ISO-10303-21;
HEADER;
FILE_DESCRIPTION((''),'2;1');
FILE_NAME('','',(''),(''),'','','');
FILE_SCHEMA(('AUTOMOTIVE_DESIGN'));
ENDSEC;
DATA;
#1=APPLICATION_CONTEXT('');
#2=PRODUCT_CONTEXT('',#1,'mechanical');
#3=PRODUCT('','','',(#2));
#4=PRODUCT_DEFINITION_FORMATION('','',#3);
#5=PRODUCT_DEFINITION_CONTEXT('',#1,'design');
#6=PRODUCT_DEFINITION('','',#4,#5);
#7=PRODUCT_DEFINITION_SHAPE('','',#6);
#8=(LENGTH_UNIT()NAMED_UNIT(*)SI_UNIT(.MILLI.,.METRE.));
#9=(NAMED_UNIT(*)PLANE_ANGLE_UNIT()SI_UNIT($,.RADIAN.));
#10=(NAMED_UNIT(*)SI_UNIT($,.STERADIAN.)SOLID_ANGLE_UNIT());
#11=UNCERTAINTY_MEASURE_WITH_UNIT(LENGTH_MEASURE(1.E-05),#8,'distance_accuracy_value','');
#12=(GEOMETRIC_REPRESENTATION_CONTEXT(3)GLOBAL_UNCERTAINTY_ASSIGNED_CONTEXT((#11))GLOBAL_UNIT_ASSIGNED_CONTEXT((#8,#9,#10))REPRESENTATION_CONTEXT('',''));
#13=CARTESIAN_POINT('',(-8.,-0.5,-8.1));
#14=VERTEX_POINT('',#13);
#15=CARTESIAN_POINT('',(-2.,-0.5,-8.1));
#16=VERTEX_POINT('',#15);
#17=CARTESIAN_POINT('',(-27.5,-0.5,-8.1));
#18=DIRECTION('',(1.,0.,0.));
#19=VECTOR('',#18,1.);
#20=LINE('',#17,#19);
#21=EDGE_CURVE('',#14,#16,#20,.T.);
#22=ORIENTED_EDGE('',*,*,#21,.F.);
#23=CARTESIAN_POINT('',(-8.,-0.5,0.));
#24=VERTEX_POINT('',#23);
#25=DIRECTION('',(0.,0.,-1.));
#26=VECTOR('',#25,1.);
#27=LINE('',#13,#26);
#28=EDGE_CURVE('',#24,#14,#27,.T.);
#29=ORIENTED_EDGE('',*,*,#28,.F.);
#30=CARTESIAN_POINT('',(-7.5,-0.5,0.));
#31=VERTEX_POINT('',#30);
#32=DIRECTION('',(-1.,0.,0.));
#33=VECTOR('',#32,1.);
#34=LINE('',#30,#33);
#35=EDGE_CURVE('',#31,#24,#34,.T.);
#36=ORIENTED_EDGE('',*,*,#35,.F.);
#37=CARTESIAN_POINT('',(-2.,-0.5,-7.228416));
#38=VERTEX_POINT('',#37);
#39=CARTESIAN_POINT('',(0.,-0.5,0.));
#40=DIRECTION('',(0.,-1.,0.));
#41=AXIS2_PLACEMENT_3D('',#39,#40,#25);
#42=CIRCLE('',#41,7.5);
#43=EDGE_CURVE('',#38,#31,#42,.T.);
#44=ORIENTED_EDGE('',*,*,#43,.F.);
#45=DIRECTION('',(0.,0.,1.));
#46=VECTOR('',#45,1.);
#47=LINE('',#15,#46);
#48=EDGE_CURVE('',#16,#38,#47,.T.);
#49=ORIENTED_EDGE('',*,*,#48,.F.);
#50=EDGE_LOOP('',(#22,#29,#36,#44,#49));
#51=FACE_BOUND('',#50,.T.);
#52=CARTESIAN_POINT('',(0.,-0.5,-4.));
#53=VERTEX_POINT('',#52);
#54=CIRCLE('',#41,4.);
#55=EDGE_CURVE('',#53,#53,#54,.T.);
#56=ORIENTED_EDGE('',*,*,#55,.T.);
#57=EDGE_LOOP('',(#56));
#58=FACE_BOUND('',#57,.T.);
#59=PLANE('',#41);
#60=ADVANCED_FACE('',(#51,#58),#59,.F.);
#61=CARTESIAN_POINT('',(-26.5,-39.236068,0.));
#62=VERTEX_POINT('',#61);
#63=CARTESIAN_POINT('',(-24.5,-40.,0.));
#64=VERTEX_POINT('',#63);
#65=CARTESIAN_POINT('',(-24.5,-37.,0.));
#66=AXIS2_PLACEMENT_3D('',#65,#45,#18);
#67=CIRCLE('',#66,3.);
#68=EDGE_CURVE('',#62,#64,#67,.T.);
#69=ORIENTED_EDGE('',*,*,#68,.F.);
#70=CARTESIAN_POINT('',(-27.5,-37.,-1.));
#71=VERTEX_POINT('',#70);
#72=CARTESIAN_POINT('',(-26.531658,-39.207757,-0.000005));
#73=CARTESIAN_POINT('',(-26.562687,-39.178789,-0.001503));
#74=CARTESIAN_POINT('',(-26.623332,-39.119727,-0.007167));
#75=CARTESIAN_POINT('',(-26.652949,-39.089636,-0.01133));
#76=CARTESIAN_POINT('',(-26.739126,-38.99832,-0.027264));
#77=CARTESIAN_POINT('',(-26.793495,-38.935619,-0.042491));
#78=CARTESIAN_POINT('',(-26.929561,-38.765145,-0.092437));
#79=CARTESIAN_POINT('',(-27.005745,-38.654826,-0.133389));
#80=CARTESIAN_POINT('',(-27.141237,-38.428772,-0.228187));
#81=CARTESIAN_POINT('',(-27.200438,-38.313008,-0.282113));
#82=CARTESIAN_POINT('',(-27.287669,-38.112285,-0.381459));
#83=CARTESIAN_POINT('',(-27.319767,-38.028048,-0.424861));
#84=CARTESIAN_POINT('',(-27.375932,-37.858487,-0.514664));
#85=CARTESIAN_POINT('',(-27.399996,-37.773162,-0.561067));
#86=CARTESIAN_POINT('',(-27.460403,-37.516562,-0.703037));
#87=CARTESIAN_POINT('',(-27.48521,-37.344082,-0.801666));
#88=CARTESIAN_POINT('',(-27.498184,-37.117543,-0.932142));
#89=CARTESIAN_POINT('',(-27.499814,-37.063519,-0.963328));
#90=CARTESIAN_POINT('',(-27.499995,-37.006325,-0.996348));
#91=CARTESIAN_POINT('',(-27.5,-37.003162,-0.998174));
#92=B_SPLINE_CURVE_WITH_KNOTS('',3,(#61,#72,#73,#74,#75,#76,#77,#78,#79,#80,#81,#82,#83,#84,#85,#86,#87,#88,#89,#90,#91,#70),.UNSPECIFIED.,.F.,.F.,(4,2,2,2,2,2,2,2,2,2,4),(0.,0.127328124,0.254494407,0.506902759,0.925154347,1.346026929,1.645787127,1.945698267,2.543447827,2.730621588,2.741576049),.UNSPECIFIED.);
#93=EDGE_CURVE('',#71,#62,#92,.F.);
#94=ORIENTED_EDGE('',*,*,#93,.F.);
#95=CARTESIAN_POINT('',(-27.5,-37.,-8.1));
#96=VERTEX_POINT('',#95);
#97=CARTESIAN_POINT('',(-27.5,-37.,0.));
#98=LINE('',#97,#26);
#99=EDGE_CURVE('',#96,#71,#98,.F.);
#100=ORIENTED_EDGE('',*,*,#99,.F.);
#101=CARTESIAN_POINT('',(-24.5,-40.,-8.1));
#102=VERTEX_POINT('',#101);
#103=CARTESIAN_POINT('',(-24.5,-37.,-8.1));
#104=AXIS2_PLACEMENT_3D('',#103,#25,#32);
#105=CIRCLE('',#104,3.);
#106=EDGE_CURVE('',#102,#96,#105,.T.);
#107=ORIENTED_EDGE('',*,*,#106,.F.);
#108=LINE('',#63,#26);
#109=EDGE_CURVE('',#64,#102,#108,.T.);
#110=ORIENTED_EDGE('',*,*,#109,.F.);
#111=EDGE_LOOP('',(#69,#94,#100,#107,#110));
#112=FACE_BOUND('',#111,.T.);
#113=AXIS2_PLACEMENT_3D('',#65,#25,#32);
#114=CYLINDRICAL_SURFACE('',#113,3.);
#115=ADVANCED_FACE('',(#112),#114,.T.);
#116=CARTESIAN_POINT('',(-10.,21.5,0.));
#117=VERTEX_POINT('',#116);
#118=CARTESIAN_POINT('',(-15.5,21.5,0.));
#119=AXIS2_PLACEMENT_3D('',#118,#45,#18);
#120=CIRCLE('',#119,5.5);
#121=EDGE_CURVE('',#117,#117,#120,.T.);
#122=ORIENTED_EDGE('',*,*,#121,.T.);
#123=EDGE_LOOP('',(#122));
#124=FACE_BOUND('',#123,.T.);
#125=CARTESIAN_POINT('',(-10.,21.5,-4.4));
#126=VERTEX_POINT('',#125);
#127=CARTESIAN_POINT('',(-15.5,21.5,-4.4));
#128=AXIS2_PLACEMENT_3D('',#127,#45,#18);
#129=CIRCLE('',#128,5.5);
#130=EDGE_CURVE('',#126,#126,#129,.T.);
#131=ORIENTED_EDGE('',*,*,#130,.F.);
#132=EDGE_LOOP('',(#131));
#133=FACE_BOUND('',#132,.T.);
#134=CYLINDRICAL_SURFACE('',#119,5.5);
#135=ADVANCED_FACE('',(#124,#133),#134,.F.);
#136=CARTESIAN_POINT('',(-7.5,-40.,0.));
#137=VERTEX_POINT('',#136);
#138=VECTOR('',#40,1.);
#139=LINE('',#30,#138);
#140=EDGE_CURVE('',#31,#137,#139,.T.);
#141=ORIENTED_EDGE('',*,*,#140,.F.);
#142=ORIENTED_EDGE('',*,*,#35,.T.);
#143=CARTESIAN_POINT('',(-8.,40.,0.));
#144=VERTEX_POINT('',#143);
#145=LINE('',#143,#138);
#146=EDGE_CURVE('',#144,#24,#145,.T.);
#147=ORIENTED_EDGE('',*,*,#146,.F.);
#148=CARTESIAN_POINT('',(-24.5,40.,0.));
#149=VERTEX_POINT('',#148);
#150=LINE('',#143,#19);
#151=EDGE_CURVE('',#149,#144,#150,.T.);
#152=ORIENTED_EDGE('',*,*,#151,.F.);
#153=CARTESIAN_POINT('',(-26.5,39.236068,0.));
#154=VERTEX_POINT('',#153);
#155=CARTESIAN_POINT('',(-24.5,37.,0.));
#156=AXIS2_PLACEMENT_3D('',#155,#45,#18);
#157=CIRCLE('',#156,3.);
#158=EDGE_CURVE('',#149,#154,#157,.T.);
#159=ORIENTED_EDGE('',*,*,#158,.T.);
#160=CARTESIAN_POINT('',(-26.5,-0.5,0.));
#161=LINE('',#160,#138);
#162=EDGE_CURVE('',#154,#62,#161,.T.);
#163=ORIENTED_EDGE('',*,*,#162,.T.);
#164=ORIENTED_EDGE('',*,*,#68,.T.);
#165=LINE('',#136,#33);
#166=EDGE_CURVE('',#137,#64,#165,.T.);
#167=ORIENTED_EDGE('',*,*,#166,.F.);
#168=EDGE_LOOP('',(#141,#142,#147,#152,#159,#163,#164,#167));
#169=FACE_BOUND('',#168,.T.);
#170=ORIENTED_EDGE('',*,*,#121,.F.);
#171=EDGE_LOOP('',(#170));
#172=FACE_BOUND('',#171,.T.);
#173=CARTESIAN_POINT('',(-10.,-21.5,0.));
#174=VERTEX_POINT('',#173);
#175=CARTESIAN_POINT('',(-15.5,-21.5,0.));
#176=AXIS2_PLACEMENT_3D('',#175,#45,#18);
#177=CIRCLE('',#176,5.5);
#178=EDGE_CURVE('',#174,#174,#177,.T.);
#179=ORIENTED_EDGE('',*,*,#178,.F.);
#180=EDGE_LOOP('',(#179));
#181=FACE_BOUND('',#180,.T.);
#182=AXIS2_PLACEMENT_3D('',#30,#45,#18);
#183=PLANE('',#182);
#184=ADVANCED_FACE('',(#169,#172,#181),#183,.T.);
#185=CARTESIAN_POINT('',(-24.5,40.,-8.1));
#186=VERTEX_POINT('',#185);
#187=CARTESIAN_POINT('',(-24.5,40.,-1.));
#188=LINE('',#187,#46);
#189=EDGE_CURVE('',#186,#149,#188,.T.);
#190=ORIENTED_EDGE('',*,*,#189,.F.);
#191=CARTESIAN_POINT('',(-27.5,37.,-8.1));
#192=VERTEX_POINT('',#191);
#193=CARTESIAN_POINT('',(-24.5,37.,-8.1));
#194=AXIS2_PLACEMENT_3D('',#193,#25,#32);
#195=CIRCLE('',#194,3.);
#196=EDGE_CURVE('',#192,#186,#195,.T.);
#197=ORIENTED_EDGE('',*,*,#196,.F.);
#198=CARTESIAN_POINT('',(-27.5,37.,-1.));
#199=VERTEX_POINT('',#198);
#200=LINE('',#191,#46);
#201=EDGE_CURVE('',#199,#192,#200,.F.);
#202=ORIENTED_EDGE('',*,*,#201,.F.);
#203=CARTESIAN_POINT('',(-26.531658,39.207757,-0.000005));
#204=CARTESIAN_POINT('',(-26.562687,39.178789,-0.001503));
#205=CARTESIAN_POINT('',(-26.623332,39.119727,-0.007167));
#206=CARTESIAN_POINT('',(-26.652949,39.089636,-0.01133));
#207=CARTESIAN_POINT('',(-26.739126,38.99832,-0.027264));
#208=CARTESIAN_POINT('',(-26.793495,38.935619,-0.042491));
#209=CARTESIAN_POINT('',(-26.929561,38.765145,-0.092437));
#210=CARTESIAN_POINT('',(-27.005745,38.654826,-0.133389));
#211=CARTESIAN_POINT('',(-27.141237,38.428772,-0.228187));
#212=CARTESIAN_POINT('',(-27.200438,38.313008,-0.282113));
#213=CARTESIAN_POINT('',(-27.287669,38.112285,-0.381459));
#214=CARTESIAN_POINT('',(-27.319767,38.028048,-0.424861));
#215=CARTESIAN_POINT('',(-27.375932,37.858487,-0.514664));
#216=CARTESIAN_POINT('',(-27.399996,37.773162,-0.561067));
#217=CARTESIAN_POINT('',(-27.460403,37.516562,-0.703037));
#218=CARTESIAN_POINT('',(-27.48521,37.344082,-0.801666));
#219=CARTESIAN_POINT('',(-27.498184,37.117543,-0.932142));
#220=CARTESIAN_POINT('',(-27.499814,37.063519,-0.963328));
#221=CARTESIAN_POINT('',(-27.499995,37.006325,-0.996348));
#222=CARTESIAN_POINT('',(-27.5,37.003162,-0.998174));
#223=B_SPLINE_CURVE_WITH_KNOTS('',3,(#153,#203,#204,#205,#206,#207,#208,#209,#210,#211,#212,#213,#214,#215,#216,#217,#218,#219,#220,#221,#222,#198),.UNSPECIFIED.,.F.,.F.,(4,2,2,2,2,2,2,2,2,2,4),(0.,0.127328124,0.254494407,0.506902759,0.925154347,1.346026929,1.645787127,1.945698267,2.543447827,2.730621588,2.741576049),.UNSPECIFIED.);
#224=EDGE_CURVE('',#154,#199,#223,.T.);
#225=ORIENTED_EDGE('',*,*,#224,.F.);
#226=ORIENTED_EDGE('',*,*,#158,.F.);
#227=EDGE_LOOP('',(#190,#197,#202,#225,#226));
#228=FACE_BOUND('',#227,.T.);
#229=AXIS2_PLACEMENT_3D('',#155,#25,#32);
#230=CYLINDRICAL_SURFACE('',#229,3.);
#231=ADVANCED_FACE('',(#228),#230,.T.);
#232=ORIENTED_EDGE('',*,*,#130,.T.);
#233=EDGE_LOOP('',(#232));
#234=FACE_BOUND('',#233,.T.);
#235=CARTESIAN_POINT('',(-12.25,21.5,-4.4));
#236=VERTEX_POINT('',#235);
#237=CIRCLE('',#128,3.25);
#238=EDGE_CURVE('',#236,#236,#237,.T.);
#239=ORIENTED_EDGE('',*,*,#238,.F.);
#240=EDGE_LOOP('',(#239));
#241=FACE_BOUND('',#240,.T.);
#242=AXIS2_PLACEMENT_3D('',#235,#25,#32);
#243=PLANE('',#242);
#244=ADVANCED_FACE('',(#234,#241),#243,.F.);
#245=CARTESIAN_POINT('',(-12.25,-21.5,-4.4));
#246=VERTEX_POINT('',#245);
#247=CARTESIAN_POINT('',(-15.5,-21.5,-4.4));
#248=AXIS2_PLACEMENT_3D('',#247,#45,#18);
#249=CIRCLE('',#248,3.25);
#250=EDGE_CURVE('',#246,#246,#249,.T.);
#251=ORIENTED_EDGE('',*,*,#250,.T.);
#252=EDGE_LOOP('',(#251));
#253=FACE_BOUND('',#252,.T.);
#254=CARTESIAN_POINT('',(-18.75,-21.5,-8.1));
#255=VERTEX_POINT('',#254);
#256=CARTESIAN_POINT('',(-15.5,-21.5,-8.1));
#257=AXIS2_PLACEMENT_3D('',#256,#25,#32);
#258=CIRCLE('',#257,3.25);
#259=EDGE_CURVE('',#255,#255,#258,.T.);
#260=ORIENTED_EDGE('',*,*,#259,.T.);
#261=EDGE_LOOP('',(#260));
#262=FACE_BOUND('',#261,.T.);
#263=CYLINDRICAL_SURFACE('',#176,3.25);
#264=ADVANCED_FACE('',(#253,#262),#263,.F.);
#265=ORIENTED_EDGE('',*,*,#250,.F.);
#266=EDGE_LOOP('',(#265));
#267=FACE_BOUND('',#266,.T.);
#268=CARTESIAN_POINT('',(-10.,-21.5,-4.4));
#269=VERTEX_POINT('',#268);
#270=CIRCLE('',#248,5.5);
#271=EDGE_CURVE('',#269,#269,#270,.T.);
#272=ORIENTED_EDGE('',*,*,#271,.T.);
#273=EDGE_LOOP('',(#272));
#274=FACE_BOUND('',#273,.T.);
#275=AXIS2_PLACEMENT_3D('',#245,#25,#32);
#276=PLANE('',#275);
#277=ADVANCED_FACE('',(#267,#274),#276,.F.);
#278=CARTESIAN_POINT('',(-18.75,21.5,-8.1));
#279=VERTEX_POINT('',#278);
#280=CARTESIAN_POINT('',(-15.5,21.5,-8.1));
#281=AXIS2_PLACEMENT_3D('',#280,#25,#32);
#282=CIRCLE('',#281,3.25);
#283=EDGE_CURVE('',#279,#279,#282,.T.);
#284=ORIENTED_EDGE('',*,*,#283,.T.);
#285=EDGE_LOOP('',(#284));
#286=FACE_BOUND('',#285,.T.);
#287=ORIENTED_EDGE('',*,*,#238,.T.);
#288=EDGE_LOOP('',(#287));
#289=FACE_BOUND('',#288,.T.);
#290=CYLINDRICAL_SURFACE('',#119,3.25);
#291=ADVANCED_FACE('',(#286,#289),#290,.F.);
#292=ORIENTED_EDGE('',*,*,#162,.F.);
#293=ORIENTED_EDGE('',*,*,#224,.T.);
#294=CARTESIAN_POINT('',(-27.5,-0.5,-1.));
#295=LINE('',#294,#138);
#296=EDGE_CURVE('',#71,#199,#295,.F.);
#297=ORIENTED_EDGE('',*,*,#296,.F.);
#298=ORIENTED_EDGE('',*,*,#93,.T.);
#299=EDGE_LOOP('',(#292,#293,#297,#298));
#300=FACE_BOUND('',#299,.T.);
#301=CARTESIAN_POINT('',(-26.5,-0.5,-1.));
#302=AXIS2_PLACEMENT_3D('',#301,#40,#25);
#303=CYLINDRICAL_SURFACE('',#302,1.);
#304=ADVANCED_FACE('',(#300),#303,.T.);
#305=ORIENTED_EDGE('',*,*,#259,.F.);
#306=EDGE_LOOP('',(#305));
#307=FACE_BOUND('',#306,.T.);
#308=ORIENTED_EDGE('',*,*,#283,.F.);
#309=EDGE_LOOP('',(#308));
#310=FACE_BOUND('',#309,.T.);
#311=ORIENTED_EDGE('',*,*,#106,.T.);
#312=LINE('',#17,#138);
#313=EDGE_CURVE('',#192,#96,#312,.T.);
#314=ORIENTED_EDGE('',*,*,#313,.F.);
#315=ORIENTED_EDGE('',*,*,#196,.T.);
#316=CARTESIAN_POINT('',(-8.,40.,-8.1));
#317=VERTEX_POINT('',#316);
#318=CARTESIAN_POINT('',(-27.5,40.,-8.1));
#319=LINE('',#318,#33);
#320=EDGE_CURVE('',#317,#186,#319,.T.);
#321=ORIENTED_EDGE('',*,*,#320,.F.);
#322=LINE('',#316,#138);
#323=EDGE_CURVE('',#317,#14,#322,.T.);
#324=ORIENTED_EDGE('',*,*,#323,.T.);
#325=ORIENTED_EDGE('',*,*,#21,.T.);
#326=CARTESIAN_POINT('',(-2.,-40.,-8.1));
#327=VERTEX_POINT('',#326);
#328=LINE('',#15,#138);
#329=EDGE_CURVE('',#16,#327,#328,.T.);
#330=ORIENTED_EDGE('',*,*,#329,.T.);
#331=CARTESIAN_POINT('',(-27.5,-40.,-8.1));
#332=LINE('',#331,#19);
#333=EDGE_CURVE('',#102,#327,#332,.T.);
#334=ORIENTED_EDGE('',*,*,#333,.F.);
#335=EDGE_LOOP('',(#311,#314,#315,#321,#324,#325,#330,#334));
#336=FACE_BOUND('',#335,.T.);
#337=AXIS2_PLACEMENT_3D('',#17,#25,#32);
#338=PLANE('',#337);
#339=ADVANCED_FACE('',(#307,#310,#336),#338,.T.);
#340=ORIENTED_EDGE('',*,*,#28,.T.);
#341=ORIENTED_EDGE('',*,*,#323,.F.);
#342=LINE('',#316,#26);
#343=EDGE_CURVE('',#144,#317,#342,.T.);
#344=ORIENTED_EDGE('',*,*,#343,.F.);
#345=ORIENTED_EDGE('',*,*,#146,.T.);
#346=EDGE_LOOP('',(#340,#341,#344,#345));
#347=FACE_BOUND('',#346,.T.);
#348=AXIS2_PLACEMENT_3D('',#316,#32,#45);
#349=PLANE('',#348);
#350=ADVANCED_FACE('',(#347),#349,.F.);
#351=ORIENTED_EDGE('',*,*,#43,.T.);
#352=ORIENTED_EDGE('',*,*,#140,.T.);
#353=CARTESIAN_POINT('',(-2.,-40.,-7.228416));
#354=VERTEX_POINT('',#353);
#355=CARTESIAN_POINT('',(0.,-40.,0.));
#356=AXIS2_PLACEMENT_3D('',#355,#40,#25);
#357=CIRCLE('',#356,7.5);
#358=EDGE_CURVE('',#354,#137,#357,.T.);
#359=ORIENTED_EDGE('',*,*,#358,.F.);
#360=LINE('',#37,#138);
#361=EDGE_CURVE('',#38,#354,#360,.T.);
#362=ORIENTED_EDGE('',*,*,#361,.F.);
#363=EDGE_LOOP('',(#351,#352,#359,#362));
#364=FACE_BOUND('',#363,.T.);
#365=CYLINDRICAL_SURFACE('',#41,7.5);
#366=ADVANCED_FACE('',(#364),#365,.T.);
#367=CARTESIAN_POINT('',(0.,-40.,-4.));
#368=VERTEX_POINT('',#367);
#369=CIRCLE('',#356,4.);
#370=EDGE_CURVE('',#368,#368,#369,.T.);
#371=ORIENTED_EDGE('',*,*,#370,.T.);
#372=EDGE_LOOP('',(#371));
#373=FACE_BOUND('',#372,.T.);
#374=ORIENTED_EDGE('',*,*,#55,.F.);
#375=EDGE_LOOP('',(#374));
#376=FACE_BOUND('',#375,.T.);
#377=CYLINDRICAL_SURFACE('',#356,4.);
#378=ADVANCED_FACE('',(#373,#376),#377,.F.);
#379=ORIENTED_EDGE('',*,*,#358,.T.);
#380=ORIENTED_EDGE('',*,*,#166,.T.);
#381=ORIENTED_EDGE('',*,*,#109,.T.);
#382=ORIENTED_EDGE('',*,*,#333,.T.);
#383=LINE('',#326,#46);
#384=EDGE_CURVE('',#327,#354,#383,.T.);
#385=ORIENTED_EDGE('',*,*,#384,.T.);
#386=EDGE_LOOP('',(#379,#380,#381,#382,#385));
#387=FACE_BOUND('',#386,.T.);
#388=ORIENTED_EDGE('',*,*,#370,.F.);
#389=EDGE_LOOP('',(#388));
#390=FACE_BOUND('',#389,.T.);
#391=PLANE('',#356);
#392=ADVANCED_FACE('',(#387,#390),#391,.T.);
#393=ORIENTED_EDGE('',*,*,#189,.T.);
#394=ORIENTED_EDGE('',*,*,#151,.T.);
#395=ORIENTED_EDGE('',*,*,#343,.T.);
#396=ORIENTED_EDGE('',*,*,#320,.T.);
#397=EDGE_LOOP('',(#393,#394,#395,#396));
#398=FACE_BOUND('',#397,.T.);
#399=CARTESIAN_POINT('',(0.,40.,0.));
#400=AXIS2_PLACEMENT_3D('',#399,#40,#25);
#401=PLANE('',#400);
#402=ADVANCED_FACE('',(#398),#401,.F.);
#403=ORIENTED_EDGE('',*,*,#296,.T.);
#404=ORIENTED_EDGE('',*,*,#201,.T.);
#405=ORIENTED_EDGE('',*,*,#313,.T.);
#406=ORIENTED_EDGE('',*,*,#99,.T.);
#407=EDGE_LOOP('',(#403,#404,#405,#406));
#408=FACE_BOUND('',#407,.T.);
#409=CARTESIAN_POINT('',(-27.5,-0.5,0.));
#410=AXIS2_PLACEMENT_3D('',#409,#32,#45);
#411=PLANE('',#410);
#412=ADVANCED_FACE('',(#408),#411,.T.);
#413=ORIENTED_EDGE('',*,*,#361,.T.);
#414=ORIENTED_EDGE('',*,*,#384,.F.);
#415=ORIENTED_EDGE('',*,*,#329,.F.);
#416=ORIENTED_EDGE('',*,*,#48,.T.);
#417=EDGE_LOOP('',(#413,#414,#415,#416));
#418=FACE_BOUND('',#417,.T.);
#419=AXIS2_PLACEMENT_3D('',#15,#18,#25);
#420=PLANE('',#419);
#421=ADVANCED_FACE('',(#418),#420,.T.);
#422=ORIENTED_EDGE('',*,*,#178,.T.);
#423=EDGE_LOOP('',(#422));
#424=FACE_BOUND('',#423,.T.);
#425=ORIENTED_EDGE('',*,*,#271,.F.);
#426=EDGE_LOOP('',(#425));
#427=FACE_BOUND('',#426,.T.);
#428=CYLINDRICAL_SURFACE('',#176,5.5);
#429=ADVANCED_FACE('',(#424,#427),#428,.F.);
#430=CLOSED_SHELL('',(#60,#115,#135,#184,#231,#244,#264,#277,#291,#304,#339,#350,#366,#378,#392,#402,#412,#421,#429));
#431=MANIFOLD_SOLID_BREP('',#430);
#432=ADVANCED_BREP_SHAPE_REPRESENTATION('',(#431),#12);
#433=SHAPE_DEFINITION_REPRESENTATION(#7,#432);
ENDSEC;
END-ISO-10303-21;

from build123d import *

# Parameters (mm, degrees)
EXTRUDE1_DEPTH       = 39.5
SKETCH2_W            = 19.5
SKETCH2_H            = 8.1
EXTRUDE2_DEPTH       = 40.5
HOLEWZD1_D           = 8
HOLEWZD1_DEPTH       = 80.000025
HOLEWZD2_D           = 6.5
HOLEWZD2_CBORE_D     = 11
HOLEWZD2_CBORE_DEPTH = 4.4
FILLET1_R            = 1
FILLET2_R            = 3


with BuildPart() as part:
    # Sketch1 → Extrude1 (new body)
    with BuildSketch(Plane.XZ.offset(40)):
        with BuildLine():
            Line((-2, -8.1), (-2, -7.228416147))
            ThreePointArc((-2, -7.228416147), (5.968668193, 4.541475531), (-7.5, 0))
            Line((-7.5, 0), (-27.5, 0))
            Line((-27.5, 0), (-27.5, -8.1))
            Line((-27.5, -8.1), (-2, -8.1))
        make_face()
    extrude(amount=-EXTRUDE1_DEPTH)

    # Sketch2 → Extrude2 (add)
    with BuildSketch(Plane(origin=(0, -0.5, 0), x_dir=(-1, 0, 0), z_dir=(0, 1, 0))):
        with Locations((17.75, -4.05)):
            Rectangle(SKETCH2_W, SKETCH2_H)
    extrude(amount=EXTRUDE2_DEPTH)

    # HoleWzd1
    with Locations(Plane(origin=(0, -40, 0), x_dir=(-1, 0, 0), z_dir=(0, -1, 0))):
        with Locations((0, 0)):
            Hole(HOLEWZD1_D / 2, depth=HOLEWZD1_DEPTH)

    # HoleWzd2 (through all)
    with Locations(Plane.XY):
        with Locations((-15.5, -21.5), (-15.5, 21.5)):
            CounterBoreHole(HOLEWZD2_D / 2, HOLEWZD2_CBORE_D / 2, HOLEWZD2_CBORE_DEPTH)

    # Fillet1
    fillet1_edges = [part.edges().sort_by_distance(p)[0] for p in [
        (-27.5, 0, 0),
    ]]
    fillet(fillet1_edges, radius=FILLET1_R)

    # Fillet2
    # the kernel refuses this fillet: 3 mm, written as the material it takes off along each edge
    with BuildSketch(Plane(origin=(-27.5, -40, 6.5), x_dir=(1, 0, 0), z_dir=(0, 0, -1)), Plane(origin=(-27.5, 40, 6.5), x_dir=(0, -1, 0), z_dir=(0, 0, -1))) as fillet2_piece_1:
        with BuildLine():
            CenterArc((FILLET2_R, -FILLET2_R), FILLET2_R, 90, 90)
            Line((0, -FILLET2_R), (0, 0))
            Line((0, 0), (FILLET2_R, 0))
        make_face()
    extrude(amount=22.1, mode=Mode.SUBTRACT)


solid = part.part
